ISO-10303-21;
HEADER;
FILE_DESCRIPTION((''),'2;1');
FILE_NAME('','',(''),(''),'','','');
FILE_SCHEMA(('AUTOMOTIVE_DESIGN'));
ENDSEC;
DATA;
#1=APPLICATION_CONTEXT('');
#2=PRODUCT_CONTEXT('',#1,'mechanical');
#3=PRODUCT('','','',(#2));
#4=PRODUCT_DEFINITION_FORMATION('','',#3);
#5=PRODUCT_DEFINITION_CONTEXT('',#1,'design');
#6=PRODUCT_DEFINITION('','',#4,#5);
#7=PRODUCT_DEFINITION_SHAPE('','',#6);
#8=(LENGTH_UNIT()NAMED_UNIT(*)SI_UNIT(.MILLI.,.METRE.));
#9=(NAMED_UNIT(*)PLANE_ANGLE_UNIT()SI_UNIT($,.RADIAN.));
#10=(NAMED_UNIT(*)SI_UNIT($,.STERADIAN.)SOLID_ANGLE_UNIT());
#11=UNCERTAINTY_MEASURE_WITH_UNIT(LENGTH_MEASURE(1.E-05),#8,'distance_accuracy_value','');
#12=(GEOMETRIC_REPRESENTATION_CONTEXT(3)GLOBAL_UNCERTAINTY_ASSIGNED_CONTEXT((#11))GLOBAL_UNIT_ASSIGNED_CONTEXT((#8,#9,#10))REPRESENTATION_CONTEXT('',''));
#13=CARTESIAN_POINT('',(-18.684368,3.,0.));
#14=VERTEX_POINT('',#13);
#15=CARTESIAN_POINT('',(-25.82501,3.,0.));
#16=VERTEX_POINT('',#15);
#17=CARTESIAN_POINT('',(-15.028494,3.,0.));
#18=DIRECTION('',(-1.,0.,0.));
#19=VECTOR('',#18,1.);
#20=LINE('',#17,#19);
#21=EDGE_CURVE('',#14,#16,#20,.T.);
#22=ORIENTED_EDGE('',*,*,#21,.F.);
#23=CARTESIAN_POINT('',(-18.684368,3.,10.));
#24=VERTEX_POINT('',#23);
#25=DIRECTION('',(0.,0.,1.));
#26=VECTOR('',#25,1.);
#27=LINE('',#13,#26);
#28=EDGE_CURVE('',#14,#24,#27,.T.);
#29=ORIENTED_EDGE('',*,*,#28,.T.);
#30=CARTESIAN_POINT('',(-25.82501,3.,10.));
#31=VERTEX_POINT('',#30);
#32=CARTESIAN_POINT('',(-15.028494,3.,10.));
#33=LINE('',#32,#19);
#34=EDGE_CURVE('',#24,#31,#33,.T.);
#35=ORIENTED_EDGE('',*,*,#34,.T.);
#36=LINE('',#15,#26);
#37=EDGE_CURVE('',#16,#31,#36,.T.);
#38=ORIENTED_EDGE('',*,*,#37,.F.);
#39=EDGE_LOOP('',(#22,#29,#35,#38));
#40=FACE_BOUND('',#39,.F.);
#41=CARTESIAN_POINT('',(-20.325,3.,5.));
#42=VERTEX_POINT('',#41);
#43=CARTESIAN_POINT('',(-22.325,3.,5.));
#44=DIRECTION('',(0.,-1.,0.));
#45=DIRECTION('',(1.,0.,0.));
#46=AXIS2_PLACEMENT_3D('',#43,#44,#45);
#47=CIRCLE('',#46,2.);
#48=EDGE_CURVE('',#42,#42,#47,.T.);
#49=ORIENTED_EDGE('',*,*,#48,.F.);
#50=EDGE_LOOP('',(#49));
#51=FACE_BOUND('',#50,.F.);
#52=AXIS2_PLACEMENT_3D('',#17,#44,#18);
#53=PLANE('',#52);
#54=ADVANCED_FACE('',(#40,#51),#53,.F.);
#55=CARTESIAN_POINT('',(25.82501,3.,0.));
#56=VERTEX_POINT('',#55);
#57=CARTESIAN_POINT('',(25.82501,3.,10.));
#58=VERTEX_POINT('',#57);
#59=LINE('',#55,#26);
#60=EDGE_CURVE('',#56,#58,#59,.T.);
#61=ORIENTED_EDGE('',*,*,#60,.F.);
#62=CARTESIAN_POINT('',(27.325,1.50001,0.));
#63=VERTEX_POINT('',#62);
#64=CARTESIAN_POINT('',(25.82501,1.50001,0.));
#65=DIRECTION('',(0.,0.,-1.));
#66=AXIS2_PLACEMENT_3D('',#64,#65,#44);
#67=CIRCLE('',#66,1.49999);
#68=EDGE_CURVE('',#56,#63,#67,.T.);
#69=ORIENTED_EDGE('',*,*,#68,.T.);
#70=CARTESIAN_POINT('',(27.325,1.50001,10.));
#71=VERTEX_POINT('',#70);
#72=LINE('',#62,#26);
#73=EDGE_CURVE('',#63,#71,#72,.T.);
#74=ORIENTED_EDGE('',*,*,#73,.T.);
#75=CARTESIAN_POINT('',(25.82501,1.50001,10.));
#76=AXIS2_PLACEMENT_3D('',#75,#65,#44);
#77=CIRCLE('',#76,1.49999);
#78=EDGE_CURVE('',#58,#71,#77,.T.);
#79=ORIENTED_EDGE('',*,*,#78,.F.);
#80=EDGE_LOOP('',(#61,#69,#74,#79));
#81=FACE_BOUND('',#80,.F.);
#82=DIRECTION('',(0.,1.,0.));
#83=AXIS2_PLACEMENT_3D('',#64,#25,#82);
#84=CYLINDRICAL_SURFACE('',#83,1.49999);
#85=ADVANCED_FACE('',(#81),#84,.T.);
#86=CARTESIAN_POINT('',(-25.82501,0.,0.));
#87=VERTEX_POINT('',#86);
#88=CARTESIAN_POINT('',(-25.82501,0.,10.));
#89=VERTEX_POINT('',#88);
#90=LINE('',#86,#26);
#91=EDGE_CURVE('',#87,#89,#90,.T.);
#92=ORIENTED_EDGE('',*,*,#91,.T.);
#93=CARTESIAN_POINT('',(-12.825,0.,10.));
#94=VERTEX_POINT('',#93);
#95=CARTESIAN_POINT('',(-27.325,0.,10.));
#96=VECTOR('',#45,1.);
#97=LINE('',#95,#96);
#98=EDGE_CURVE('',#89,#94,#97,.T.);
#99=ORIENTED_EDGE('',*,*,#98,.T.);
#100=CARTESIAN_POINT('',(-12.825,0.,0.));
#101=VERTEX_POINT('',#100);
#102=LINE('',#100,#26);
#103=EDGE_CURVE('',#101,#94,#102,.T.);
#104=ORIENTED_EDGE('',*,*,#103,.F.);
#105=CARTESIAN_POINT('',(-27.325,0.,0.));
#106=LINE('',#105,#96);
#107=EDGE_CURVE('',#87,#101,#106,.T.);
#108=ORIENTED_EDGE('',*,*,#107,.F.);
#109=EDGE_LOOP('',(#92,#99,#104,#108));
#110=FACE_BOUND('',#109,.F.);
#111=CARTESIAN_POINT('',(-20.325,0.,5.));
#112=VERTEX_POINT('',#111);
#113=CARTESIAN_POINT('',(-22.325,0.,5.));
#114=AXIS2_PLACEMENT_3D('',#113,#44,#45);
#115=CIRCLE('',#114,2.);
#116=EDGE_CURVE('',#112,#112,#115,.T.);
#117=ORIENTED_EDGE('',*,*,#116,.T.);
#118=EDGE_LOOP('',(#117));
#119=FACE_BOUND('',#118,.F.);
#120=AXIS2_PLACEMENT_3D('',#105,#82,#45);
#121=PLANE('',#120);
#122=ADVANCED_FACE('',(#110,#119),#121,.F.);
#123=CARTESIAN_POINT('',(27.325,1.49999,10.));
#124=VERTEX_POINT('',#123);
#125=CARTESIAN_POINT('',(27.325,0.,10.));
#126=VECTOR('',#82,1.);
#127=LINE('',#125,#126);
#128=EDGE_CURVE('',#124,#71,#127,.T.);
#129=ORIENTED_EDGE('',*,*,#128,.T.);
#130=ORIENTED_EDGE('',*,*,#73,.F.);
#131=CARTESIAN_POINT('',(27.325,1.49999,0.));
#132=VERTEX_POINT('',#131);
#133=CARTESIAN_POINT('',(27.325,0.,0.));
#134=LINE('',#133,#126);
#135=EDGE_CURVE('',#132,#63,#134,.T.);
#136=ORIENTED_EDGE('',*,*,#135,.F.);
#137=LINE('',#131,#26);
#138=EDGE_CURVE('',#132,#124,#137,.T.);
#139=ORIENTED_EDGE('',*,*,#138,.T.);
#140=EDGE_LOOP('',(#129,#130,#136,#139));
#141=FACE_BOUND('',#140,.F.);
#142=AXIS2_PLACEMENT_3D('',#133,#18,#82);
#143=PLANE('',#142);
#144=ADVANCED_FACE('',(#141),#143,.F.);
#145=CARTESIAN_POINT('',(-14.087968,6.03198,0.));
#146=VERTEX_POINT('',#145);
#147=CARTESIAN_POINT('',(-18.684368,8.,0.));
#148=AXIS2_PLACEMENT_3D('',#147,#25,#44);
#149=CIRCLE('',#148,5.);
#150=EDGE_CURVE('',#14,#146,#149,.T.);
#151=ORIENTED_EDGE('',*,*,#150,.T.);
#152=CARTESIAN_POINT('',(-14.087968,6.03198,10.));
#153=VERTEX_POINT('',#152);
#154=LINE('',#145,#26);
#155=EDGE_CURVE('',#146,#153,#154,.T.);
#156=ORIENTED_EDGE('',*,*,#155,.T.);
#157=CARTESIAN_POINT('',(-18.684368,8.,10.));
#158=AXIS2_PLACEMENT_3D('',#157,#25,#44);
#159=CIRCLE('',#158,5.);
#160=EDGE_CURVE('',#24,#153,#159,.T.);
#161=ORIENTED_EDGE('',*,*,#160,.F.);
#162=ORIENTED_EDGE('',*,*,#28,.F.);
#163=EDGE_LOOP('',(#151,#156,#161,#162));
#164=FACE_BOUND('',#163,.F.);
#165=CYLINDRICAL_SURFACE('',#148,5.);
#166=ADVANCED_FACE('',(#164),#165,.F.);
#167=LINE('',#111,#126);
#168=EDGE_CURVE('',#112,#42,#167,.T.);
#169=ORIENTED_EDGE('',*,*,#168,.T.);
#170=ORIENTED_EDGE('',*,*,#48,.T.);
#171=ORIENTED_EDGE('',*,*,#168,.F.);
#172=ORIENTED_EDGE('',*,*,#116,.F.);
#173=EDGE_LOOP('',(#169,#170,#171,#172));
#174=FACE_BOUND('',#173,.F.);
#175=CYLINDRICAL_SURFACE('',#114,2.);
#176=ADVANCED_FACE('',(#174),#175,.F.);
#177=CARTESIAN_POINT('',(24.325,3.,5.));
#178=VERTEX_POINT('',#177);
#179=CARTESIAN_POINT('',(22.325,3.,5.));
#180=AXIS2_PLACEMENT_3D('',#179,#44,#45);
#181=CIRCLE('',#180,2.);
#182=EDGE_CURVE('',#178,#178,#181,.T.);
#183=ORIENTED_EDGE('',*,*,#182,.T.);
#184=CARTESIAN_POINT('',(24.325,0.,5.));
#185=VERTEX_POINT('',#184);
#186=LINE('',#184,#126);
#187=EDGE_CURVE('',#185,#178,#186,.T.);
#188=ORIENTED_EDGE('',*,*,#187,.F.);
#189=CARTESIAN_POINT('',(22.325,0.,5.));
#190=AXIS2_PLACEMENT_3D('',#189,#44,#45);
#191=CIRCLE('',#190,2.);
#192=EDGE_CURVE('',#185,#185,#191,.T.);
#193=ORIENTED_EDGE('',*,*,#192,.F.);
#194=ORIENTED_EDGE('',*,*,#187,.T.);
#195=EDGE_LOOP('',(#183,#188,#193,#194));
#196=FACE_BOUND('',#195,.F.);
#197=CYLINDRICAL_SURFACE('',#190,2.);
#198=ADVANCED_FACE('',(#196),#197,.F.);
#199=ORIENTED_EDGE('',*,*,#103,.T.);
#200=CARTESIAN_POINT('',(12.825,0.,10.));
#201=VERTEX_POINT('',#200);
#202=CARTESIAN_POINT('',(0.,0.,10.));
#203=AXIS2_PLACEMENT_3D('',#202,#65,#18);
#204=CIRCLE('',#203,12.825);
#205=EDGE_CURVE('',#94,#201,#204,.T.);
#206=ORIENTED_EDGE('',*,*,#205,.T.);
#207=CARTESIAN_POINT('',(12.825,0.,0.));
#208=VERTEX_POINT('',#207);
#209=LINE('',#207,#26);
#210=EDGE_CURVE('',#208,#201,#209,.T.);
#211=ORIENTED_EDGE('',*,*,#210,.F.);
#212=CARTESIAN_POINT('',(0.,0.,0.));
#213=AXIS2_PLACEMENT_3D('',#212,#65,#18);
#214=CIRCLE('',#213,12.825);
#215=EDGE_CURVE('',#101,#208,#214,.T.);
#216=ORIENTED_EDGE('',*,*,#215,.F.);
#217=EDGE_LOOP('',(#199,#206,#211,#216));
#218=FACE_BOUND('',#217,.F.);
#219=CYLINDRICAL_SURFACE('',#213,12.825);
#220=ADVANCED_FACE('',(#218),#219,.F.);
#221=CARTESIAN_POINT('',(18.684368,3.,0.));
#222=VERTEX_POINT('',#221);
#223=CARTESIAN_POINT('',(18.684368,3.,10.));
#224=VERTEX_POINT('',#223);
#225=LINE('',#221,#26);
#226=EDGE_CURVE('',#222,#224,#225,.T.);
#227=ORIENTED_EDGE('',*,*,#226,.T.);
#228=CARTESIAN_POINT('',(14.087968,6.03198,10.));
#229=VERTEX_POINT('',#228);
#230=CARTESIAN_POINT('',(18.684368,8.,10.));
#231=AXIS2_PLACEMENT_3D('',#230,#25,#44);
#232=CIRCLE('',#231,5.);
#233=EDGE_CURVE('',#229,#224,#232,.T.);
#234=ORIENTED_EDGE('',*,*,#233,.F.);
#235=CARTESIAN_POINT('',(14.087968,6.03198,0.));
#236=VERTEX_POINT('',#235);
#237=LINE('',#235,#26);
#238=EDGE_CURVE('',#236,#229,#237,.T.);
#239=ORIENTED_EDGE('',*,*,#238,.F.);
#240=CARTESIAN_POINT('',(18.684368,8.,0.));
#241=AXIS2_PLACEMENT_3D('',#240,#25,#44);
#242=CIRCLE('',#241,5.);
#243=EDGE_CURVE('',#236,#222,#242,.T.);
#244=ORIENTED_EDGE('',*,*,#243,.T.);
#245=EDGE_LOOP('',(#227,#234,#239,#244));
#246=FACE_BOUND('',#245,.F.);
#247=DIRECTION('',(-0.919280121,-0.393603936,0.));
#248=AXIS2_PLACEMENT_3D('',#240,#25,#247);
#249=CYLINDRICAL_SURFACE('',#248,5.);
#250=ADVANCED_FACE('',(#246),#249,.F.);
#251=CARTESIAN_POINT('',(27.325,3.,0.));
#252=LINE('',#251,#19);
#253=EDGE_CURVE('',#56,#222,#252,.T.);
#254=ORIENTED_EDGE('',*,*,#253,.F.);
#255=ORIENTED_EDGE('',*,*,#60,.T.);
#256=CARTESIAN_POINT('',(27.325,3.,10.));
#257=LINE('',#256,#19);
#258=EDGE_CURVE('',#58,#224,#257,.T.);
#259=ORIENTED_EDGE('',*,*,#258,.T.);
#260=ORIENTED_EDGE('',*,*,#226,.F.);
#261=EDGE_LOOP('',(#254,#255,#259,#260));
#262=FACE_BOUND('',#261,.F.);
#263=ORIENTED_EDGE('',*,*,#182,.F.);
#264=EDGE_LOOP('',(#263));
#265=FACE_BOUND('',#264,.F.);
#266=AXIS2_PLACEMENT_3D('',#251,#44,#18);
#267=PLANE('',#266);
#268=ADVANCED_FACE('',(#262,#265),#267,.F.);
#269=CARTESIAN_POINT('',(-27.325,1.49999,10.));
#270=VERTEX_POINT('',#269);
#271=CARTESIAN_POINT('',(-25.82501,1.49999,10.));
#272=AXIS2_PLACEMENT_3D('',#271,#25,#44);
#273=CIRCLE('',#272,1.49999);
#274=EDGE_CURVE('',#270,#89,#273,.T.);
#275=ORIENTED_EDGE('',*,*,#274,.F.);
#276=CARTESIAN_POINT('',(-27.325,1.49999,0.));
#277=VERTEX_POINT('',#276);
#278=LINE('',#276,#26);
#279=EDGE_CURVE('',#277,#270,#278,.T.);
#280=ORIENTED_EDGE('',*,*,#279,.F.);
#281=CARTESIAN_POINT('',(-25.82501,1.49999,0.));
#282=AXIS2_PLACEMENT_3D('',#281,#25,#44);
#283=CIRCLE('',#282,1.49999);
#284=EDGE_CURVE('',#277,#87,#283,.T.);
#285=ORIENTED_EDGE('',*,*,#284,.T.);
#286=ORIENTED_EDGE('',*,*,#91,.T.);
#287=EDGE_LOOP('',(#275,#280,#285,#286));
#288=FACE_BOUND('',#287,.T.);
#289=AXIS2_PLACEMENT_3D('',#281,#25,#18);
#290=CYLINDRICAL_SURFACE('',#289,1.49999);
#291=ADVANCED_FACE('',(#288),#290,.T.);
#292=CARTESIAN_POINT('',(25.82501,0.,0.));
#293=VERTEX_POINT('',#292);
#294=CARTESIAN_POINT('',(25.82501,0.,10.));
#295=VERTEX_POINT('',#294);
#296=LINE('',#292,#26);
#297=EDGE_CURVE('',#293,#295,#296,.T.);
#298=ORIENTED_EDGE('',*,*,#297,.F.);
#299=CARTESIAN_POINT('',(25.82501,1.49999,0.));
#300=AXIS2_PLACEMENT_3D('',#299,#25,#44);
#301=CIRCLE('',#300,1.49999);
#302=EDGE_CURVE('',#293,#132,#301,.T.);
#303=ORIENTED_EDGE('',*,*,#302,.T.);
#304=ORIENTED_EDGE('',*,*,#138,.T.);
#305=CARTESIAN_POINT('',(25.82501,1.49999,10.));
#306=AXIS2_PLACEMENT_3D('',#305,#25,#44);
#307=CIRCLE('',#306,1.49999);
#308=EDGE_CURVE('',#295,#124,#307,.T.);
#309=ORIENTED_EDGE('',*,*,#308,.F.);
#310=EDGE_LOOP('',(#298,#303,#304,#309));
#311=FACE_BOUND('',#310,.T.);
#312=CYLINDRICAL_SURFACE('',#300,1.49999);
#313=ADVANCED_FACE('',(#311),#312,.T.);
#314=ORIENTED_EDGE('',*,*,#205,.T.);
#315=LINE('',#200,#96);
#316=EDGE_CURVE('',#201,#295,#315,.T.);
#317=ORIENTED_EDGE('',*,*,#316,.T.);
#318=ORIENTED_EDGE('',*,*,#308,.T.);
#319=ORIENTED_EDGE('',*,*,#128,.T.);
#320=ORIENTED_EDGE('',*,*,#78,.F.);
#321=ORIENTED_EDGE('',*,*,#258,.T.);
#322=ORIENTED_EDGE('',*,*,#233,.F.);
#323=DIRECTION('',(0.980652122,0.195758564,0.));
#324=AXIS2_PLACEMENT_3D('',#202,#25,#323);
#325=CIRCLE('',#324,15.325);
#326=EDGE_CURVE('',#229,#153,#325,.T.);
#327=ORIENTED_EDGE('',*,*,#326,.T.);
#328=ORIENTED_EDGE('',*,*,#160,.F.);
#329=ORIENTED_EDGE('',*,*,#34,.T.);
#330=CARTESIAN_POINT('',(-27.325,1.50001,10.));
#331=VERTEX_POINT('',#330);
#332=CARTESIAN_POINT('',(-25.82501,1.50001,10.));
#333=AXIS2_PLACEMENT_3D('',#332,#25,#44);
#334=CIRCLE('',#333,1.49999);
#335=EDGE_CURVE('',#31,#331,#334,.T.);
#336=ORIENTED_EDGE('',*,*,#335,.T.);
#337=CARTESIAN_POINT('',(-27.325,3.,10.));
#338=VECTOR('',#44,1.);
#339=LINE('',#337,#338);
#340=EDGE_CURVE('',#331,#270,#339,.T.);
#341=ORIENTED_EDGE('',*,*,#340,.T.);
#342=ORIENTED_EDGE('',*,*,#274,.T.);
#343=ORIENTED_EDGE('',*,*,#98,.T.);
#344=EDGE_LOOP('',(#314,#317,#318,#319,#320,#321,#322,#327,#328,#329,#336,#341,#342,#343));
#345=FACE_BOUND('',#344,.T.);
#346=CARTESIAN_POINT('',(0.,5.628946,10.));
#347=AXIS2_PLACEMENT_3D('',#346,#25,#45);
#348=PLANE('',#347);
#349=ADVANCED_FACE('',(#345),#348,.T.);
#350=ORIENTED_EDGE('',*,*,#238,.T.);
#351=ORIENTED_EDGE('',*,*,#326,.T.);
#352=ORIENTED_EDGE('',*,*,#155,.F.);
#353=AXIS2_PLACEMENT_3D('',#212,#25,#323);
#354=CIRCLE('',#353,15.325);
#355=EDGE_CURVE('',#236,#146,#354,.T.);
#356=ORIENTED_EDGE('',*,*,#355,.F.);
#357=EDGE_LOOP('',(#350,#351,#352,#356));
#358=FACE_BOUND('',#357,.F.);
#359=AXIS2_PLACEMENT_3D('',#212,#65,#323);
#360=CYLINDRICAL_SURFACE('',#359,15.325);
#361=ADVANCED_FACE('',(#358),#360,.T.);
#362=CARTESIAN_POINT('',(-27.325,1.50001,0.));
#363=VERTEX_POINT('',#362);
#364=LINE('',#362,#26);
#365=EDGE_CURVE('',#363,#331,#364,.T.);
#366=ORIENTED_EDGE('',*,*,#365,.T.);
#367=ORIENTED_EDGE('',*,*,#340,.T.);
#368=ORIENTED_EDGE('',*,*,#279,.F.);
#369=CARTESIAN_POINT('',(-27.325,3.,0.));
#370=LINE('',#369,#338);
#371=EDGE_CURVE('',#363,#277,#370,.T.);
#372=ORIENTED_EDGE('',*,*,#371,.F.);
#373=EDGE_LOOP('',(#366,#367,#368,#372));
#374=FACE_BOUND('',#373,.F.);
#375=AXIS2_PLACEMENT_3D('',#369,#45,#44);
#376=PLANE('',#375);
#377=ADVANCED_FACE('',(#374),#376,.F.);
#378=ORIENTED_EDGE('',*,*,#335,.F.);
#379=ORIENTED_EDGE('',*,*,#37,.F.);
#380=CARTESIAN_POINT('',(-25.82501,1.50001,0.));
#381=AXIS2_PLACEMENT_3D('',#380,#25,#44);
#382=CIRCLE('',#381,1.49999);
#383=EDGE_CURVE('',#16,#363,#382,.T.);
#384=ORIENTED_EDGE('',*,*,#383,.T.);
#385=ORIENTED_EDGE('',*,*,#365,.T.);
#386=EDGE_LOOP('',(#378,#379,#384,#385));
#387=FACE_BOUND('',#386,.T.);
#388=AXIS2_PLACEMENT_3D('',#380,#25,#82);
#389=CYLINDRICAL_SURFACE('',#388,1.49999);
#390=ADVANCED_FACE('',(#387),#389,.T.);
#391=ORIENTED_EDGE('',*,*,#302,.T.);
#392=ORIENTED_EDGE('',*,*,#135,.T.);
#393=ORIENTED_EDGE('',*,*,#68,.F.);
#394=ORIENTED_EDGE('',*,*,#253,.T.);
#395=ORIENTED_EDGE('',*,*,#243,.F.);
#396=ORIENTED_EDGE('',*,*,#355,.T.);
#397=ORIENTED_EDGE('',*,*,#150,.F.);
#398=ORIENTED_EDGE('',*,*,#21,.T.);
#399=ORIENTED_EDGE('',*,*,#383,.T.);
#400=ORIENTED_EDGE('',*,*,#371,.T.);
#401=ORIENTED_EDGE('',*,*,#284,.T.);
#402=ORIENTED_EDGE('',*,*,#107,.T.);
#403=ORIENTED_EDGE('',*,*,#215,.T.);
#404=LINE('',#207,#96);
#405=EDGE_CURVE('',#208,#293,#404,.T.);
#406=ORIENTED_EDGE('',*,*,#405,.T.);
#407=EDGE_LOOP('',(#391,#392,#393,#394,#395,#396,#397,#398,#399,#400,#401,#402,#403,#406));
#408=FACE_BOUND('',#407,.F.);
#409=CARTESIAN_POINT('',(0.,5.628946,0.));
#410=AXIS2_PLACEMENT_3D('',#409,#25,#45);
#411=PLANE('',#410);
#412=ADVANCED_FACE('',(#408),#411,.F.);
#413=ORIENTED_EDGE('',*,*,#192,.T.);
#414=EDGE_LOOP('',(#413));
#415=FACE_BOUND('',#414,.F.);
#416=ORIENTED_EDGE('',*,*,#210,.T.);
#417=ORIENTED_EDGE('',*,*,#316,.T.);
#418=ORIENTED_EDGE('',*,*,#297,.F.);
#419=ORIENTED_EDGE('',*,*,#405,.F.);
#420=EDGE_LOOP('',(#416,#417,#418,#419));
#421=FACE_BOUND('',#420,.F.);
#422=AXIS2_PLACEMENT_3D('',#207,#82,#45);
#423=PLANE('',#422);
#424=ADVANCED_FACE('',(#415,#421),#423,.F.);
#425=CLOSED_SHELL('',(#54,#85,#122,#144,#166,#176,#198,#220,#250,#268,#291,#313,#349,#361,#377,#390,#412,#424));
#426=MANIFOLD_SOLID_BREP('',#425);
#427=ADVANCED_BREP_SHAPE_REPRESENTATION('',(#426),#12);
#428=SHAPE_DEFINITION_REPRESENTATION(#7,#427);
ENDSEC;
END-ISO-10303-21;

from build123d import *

# Parameters (mm, degrees)
F1_DEPTH = 10
F2_R     = 2
F3_DEPTH = 15.326
F4_R     = 5
F5_R     = 1.49999


# Not quite as in the source:
# - a fillet or chamfer is up to 0.001 mm smaller than in the source, because OpenCascade refuses the exact size


with BuildPart() as f1:
    # F0 (on Top) → F1 (new body)
    with BuildSketch(Plane.XY):
        with BuildLine():
            Line((-15.0284937702, 3), (-27.325, 3))
            Line((-27.325, 3), (-27.325, 0))
            Line((-27.325, 0), (-12.825, 0))
            ThreePointArc((-12.825, 0), (0, 12.825), (12.825, 0))
            Line((12.825, 0), (27.325, 0))
            Line((27.325, 0), (27.325, 3))
            Line((27.325, 3), (15.0284937702, 3))
            ThreePointArc((15.0284937702, 3), (0, 15.325), (-15.0284937702, 3))
        make_face()
    extrude(amount=F1_DEPTH)

    # F2 (on face) → F3 (cut, through all)
    with BuildSketch(Plane.XZ):
        with Locations((-22.325, 5)):
            Circle(F2_R)
        with Locations((22.325, 5)):
            Circle(F2_R)
    extrude(amount=-F3_DEPTH, mode=Mode.SUBTRACT)

    # F4
    f4_edges = [f1.edges().sort_by_distance(p)[0] for p in [
        (-15.028494, 3, 5),
        (15.028494, 3, 5),
    ]]
    fillet(f4_edges, radius=F4_R)

    # F5 (radius 1.5 in the source; OpenCascade refuses exactly that, so slightly less here)
    f5_edges = [f1.edges().sort_by_distance(p)[0] for p in [
        (-27.325, 0, 5),
        (-27.325, 3, 5),
        (27.325, 0, 5),
        (27.325, 3, 5),
    ]]
    fillet(f5_edges, radius=F5_R)


solid = f1.part
